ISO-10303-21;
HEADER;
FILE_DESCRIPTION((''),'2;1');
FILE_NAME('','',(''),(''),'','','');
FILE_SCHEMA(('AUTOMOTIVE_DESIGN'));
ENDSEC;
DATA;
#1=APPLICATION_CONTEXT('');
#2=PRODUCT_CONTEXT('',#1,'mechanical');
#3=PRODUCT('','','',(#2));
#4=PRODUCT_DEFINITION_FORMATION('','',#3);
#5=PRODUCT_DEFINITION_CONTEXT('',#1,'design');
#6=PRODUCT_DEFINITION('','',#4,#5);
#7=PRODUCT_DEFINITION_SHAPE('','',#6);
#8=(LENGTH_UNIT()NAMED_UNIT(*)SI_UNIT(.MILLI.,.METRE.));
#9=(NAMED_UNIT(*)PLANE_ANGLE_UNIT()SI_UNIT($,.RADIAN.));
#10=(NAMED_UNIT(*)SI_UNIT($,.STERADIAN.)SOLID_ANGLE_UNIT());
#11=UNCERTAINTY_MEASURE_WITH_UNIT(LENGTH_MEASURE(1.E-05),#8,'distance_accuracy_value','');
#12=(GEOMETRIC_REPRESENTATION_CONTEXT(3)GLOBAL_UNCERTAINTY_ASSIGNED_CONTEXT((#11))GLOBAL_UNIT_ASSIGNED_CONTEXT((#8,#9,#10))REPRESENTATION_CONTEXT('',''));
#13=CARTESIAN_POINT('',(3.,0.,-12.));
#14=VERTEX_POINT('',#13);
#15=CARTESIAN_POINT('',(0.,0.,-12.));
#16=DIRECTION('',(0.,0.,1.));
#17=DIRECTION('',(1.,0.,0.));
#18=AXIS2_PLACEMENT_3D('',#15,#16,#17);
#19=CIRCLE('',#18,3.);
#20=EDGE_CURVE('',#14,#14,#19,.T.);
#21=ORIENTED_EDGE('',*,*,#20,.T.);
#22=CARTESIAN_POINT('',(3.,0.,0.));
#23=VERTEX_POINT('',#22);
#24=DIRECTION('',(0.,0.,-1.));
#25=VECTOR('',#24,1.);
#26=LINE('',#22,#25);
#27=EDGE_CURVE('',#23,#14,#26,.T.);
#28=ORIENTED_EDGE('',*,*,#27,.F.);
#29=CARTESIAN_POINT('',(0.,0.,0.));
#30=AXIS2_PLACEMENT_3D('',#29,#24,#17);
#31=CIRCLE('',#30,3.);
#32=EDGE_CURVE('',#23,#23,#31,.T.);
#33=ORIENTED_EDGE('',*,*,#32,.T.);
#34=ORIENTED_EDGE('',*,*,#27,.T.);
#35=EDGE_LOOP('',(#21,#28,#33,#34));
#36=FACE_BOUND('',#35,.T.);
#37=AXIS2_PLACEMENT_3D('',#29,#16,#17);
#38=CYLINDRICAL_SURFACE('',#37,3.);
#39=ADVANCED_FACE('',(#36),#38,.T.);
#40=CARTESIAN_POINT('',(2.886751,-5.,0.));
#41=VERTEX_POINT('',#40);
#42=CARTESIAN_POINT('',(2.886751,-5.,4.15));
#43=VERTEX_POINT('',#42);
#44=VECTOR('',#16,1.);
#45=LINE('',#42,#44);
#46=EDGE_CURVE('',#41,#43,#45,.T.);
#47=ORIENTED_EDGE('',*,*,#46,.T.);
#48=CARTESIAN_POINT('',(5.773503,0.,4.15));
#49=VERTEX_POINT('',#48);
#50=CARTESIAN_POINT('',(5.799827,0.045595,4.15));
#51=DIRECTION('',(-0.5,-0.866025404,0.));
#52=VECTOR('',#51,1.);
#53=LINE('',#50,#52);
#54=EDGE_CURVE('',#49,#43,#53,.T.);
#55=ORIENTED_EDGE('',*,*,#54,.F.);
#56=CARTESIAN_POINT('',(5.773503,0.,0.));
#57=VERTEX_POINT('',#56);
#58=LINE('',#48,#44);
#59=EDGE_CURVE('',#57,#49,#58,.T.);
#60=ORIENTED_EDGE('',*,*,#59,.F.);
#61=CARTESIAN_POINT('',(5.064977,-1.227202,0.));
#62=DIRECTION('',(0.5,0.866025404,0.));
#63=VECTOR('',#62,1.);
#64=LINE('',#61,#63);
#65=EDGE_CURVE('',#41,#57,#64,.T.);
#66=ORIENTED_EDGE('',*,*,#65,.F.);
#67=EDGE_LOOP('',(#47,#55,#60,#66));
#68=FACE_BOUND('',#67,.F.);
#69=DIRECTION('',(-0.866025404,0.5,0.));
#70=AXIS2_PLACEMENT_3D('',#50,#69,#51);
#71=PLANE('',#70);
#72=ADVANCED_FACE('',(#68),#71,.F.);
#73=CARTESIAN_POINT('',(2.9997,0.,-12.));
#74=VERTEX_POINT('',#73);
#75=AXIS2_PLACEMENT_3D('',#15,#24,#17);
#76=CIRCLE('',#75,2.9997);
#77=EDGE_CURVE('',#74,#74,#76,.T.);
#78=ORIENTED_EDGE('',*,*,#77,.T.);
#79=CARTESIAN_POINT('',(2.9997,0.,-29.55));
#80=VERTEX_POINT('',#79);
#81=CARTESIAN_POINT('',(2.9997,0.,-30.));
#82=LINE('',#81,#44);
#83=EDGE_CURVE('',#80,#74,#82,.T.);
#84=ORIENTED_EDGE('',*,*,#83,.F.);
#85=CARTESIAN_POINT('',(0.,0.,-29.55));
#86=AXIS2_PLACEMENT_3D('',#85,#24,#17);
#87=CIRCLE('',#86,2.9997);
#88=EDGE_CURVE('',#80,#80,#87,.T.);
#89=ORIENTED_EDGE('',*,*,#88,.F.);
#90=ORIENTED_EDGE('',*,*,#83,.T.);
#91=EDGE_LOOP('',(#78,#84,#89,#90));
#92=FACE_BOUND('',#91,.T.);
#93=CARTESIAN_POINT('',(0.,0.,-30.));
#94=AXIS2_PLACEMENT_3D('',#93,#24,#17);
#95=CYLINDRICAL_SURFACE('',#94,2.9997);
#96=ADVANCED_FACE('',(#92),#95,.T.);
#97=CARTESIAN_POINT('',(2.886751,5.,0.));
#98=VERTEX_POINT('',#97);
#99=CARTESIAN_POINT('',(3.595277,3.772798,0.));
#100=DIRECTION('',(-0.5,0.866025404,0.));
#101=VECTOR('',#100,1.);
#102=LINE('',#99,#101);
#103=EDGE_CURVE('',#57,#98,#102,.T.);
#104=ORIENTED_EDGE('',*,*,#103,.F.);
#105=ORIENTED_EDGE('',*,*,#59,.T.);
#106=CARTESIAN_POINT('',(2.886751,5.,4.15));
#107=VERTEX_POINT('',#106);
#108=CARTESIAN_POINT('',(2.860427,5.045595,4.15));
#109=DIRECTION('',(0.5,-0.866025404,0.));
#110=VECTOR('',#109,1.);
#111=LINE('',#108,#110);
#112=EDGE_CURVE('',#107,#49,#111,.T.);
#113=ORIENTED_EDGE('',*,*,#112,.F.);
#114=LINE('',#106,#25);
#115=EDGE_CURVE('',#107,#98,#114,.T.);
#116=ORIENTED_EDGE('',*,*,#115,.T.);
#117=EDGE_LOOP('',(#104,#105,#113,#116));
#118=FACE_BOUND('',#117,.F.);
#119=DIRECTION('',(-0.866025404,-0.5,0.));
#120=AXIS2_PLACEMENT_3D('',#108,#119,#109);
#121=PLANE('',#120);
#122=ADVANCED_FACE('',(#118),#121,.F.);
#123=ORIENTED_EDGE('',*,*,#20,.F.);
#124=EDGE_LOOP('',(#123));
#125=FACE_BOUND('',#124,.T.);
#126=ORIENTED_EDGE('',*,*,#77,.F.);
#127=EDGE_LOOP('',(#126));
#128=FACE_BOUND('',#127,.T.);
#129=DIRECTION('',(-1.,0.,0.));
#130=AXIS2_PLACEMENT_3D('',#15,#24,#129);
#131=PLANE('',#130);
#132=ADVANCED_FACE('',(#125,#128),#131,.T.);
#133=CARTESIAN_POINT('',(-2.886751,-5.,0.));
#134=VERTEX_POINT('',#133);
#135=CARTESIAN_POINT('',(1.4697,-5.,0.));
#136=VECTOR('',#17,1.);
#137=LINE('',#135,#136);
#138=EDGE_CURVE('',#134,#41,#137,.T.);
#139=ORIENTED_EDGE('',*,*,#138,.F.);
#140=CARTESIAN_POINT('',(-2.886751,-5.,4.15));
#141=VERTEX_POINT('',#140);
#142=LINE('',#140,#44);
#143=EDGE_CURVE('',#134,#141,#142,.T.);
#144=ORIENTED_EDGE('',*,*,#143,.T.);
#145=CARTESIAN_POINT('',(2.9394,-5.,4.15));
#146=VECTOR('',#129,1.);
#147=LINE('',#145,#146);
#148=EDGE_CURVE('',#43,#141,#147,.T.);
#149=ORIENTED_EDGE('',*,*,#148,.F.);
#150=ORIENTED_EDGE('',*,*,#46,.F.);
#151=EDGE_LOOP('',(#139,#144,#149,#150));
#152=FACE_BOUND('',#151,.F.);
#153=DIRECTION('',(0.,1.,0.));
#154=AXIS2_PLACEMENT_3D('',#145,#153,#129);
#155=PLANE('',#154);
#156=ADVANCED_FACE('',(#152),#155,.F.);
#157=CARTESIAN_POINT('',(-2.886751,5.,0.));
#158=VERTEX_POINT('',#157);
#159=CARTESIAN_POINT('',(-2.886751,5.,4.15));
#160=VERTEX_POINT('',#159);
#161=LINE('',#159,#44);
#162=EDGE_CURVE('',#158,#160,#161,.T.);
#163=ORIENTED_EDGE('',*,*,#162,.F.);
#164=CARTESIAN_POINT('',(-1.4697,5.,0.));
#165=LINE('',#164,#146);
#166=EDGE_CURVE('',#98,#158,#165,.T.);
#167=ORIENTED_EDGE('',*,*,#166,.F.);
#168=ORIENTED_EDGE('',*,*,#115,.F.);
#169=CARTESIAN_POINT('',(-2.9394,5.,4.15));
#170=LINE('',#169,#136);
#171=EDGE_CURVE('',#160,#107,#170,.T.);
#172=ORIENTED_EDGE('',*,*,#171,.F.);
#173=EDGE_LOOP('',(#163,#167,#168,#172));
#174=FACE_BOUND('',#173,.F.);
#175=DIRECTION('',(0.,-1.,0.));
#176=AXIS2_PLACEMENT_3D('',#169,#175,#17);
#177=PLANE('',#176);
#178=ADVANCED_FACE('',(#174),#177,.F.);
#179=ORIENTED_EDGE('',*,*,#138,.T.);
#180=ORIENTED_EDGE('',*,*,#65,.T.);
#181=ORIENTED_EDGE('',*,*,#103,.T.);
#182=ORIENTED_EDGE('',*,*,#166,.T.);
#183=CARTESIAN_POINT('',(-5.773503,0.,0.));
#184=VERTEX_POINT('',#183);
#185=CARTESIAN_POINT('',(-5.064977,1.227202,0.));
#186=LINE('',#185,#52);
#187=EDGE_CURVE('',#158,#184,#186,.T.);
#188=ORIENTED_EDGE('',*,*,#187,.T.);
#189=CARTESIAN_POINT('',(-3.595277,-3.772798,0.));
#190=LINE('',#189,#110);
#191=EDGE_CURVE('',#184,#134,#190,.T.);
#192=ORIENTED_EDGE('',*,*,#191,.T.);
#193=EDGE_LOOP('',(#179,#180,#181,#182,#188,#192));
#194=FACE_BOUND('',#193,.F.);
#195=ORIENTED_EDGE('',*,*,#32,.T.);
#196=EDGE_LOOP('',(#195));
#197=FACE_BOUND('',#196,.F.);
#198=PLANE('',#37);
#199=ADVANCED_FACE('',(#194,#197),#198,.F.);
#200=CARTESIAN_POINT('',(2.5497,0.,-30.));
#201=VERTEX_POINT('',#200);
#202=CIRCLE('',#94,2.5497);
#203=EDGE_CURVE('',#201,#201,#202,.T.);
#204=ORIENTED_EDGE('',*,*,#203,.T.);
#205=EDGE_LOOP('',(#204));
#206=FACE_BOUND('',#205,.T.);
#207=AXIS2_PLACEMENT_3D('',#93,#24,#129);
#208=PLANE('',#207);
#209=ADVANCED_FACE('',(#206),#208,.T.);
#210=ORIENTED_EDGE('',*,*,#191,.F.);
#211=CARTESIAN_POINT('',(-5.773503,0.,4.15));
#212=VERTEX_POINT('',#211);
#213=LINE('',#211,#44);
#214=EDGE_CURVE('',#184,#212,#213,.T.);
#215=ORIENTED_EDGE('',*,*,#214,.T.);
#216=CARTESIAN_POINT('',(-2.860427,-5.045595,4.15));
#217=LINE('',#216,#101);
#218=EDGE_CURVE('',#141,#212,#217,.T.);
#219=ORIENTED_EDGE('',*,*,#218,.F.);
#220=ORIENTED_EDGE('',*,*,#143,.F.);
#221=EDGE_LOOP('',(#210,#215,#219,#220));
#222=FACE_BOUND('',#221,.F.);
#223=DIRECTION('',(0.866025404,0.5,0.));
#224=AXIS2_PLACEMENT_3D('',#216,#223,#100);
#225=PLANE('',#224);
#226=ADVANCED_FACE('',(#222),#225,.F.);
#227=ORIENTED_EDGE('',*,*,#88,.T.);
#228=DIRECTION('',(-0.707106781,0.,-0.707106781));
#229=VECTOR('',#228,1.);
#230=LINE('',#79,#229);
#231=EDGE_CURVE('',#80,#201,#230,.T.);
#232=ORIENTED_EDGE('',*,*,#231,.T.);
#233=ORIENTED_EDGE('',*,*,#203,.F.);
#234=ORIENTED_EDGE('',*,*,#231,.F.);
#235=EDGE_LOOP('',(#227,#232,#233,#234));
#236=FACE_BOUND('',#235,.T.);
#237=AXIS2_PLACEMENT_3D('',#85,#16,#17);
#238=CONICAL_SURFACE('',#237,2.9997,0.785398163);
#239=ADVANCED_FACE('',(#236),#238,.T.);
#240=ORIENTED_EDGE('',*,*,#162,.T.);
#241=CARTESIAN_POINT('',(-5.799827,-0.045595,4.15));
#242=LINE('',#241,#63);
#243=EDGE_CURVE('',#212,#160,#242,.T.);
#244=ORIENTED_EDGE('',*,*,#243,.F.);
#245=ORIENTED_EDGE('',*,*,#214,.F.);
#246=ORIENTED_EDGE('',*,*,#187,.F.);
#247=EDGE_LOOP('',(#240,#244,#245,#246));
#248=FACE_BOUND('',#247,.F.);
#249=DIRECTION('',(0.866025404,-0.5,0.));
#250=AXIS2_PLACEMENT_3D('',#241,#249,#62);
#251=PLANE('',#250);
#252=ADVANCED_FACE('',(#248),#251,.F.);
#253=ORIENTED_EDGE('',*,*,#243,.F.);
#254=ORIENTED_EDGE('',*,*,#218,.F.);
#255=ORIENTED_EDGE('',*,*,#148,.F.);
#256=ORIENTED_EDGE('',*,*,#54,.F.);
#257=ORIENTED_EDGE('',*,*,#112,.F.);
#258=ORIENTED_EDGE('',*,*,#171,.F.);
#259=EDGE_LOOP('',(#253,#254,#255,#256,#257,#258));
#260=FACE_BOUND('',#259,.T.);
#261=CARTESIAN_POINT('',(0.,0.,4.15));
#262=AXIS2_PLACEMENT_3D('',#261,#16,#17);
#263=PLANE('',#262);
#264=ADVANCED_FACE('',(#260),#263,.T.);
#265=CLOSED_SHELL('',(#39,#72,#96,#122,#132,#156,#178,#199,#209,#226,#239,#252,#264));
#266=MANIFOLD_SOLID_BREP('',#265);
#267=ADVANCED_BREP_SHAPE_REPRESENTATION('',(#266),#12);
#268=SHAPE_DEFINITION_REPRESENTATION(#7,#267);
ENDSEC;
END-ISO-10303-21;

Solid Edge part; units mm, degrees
sketch "Sketch1" plane through (0, 0, 0) normal (0, 0, 1) x (1, 0, 0)
  circle A0 centre (0, 0) radius 5.8
  dimension "D1" = 11.6
extrude "Protrusion1" add sketch "Sketch1" along normal blind 4.15
sketch "Sketch2" plane through (0, 0, 0) normal (0, 0, -1) x (1, 0, 0)
  circle A0 centre (0, 0) radius 3
extrude "Protrusion2" add sketch "Sketch2" along normal blind 30
sketch "Sketch3" plane through (0, 0, -30) normal (0, 0, -1) x (1, 0, 0)
  circle A0 centre (0, 0) radius 2.9997
extrude "Cutout1" cut sketch "Sketch3" against normal blind 18 flip side to cut
chamfer "Chamfer_1" distance 0.45 angle 45 1 edges at (-2.9997, 0, -30)
sketch "Sketch4" plane through (0, 0, 4.15) normal (0, 0, 1) x (1, 0, 0)
  line L0 (-2.9394, 5) -> (2.9394, 5)
  dimension "D1" = 10
extrude "Cutout2" cut sketch "Sketch4" against normal up to next material side at (0, 5.05, 4.15)
pattern_circular "Pattern1" count 6 over 360 about axis through (0, 0, 4.15) along (0, 0, 1) of "Cutout2"
properties part number "24101196"
